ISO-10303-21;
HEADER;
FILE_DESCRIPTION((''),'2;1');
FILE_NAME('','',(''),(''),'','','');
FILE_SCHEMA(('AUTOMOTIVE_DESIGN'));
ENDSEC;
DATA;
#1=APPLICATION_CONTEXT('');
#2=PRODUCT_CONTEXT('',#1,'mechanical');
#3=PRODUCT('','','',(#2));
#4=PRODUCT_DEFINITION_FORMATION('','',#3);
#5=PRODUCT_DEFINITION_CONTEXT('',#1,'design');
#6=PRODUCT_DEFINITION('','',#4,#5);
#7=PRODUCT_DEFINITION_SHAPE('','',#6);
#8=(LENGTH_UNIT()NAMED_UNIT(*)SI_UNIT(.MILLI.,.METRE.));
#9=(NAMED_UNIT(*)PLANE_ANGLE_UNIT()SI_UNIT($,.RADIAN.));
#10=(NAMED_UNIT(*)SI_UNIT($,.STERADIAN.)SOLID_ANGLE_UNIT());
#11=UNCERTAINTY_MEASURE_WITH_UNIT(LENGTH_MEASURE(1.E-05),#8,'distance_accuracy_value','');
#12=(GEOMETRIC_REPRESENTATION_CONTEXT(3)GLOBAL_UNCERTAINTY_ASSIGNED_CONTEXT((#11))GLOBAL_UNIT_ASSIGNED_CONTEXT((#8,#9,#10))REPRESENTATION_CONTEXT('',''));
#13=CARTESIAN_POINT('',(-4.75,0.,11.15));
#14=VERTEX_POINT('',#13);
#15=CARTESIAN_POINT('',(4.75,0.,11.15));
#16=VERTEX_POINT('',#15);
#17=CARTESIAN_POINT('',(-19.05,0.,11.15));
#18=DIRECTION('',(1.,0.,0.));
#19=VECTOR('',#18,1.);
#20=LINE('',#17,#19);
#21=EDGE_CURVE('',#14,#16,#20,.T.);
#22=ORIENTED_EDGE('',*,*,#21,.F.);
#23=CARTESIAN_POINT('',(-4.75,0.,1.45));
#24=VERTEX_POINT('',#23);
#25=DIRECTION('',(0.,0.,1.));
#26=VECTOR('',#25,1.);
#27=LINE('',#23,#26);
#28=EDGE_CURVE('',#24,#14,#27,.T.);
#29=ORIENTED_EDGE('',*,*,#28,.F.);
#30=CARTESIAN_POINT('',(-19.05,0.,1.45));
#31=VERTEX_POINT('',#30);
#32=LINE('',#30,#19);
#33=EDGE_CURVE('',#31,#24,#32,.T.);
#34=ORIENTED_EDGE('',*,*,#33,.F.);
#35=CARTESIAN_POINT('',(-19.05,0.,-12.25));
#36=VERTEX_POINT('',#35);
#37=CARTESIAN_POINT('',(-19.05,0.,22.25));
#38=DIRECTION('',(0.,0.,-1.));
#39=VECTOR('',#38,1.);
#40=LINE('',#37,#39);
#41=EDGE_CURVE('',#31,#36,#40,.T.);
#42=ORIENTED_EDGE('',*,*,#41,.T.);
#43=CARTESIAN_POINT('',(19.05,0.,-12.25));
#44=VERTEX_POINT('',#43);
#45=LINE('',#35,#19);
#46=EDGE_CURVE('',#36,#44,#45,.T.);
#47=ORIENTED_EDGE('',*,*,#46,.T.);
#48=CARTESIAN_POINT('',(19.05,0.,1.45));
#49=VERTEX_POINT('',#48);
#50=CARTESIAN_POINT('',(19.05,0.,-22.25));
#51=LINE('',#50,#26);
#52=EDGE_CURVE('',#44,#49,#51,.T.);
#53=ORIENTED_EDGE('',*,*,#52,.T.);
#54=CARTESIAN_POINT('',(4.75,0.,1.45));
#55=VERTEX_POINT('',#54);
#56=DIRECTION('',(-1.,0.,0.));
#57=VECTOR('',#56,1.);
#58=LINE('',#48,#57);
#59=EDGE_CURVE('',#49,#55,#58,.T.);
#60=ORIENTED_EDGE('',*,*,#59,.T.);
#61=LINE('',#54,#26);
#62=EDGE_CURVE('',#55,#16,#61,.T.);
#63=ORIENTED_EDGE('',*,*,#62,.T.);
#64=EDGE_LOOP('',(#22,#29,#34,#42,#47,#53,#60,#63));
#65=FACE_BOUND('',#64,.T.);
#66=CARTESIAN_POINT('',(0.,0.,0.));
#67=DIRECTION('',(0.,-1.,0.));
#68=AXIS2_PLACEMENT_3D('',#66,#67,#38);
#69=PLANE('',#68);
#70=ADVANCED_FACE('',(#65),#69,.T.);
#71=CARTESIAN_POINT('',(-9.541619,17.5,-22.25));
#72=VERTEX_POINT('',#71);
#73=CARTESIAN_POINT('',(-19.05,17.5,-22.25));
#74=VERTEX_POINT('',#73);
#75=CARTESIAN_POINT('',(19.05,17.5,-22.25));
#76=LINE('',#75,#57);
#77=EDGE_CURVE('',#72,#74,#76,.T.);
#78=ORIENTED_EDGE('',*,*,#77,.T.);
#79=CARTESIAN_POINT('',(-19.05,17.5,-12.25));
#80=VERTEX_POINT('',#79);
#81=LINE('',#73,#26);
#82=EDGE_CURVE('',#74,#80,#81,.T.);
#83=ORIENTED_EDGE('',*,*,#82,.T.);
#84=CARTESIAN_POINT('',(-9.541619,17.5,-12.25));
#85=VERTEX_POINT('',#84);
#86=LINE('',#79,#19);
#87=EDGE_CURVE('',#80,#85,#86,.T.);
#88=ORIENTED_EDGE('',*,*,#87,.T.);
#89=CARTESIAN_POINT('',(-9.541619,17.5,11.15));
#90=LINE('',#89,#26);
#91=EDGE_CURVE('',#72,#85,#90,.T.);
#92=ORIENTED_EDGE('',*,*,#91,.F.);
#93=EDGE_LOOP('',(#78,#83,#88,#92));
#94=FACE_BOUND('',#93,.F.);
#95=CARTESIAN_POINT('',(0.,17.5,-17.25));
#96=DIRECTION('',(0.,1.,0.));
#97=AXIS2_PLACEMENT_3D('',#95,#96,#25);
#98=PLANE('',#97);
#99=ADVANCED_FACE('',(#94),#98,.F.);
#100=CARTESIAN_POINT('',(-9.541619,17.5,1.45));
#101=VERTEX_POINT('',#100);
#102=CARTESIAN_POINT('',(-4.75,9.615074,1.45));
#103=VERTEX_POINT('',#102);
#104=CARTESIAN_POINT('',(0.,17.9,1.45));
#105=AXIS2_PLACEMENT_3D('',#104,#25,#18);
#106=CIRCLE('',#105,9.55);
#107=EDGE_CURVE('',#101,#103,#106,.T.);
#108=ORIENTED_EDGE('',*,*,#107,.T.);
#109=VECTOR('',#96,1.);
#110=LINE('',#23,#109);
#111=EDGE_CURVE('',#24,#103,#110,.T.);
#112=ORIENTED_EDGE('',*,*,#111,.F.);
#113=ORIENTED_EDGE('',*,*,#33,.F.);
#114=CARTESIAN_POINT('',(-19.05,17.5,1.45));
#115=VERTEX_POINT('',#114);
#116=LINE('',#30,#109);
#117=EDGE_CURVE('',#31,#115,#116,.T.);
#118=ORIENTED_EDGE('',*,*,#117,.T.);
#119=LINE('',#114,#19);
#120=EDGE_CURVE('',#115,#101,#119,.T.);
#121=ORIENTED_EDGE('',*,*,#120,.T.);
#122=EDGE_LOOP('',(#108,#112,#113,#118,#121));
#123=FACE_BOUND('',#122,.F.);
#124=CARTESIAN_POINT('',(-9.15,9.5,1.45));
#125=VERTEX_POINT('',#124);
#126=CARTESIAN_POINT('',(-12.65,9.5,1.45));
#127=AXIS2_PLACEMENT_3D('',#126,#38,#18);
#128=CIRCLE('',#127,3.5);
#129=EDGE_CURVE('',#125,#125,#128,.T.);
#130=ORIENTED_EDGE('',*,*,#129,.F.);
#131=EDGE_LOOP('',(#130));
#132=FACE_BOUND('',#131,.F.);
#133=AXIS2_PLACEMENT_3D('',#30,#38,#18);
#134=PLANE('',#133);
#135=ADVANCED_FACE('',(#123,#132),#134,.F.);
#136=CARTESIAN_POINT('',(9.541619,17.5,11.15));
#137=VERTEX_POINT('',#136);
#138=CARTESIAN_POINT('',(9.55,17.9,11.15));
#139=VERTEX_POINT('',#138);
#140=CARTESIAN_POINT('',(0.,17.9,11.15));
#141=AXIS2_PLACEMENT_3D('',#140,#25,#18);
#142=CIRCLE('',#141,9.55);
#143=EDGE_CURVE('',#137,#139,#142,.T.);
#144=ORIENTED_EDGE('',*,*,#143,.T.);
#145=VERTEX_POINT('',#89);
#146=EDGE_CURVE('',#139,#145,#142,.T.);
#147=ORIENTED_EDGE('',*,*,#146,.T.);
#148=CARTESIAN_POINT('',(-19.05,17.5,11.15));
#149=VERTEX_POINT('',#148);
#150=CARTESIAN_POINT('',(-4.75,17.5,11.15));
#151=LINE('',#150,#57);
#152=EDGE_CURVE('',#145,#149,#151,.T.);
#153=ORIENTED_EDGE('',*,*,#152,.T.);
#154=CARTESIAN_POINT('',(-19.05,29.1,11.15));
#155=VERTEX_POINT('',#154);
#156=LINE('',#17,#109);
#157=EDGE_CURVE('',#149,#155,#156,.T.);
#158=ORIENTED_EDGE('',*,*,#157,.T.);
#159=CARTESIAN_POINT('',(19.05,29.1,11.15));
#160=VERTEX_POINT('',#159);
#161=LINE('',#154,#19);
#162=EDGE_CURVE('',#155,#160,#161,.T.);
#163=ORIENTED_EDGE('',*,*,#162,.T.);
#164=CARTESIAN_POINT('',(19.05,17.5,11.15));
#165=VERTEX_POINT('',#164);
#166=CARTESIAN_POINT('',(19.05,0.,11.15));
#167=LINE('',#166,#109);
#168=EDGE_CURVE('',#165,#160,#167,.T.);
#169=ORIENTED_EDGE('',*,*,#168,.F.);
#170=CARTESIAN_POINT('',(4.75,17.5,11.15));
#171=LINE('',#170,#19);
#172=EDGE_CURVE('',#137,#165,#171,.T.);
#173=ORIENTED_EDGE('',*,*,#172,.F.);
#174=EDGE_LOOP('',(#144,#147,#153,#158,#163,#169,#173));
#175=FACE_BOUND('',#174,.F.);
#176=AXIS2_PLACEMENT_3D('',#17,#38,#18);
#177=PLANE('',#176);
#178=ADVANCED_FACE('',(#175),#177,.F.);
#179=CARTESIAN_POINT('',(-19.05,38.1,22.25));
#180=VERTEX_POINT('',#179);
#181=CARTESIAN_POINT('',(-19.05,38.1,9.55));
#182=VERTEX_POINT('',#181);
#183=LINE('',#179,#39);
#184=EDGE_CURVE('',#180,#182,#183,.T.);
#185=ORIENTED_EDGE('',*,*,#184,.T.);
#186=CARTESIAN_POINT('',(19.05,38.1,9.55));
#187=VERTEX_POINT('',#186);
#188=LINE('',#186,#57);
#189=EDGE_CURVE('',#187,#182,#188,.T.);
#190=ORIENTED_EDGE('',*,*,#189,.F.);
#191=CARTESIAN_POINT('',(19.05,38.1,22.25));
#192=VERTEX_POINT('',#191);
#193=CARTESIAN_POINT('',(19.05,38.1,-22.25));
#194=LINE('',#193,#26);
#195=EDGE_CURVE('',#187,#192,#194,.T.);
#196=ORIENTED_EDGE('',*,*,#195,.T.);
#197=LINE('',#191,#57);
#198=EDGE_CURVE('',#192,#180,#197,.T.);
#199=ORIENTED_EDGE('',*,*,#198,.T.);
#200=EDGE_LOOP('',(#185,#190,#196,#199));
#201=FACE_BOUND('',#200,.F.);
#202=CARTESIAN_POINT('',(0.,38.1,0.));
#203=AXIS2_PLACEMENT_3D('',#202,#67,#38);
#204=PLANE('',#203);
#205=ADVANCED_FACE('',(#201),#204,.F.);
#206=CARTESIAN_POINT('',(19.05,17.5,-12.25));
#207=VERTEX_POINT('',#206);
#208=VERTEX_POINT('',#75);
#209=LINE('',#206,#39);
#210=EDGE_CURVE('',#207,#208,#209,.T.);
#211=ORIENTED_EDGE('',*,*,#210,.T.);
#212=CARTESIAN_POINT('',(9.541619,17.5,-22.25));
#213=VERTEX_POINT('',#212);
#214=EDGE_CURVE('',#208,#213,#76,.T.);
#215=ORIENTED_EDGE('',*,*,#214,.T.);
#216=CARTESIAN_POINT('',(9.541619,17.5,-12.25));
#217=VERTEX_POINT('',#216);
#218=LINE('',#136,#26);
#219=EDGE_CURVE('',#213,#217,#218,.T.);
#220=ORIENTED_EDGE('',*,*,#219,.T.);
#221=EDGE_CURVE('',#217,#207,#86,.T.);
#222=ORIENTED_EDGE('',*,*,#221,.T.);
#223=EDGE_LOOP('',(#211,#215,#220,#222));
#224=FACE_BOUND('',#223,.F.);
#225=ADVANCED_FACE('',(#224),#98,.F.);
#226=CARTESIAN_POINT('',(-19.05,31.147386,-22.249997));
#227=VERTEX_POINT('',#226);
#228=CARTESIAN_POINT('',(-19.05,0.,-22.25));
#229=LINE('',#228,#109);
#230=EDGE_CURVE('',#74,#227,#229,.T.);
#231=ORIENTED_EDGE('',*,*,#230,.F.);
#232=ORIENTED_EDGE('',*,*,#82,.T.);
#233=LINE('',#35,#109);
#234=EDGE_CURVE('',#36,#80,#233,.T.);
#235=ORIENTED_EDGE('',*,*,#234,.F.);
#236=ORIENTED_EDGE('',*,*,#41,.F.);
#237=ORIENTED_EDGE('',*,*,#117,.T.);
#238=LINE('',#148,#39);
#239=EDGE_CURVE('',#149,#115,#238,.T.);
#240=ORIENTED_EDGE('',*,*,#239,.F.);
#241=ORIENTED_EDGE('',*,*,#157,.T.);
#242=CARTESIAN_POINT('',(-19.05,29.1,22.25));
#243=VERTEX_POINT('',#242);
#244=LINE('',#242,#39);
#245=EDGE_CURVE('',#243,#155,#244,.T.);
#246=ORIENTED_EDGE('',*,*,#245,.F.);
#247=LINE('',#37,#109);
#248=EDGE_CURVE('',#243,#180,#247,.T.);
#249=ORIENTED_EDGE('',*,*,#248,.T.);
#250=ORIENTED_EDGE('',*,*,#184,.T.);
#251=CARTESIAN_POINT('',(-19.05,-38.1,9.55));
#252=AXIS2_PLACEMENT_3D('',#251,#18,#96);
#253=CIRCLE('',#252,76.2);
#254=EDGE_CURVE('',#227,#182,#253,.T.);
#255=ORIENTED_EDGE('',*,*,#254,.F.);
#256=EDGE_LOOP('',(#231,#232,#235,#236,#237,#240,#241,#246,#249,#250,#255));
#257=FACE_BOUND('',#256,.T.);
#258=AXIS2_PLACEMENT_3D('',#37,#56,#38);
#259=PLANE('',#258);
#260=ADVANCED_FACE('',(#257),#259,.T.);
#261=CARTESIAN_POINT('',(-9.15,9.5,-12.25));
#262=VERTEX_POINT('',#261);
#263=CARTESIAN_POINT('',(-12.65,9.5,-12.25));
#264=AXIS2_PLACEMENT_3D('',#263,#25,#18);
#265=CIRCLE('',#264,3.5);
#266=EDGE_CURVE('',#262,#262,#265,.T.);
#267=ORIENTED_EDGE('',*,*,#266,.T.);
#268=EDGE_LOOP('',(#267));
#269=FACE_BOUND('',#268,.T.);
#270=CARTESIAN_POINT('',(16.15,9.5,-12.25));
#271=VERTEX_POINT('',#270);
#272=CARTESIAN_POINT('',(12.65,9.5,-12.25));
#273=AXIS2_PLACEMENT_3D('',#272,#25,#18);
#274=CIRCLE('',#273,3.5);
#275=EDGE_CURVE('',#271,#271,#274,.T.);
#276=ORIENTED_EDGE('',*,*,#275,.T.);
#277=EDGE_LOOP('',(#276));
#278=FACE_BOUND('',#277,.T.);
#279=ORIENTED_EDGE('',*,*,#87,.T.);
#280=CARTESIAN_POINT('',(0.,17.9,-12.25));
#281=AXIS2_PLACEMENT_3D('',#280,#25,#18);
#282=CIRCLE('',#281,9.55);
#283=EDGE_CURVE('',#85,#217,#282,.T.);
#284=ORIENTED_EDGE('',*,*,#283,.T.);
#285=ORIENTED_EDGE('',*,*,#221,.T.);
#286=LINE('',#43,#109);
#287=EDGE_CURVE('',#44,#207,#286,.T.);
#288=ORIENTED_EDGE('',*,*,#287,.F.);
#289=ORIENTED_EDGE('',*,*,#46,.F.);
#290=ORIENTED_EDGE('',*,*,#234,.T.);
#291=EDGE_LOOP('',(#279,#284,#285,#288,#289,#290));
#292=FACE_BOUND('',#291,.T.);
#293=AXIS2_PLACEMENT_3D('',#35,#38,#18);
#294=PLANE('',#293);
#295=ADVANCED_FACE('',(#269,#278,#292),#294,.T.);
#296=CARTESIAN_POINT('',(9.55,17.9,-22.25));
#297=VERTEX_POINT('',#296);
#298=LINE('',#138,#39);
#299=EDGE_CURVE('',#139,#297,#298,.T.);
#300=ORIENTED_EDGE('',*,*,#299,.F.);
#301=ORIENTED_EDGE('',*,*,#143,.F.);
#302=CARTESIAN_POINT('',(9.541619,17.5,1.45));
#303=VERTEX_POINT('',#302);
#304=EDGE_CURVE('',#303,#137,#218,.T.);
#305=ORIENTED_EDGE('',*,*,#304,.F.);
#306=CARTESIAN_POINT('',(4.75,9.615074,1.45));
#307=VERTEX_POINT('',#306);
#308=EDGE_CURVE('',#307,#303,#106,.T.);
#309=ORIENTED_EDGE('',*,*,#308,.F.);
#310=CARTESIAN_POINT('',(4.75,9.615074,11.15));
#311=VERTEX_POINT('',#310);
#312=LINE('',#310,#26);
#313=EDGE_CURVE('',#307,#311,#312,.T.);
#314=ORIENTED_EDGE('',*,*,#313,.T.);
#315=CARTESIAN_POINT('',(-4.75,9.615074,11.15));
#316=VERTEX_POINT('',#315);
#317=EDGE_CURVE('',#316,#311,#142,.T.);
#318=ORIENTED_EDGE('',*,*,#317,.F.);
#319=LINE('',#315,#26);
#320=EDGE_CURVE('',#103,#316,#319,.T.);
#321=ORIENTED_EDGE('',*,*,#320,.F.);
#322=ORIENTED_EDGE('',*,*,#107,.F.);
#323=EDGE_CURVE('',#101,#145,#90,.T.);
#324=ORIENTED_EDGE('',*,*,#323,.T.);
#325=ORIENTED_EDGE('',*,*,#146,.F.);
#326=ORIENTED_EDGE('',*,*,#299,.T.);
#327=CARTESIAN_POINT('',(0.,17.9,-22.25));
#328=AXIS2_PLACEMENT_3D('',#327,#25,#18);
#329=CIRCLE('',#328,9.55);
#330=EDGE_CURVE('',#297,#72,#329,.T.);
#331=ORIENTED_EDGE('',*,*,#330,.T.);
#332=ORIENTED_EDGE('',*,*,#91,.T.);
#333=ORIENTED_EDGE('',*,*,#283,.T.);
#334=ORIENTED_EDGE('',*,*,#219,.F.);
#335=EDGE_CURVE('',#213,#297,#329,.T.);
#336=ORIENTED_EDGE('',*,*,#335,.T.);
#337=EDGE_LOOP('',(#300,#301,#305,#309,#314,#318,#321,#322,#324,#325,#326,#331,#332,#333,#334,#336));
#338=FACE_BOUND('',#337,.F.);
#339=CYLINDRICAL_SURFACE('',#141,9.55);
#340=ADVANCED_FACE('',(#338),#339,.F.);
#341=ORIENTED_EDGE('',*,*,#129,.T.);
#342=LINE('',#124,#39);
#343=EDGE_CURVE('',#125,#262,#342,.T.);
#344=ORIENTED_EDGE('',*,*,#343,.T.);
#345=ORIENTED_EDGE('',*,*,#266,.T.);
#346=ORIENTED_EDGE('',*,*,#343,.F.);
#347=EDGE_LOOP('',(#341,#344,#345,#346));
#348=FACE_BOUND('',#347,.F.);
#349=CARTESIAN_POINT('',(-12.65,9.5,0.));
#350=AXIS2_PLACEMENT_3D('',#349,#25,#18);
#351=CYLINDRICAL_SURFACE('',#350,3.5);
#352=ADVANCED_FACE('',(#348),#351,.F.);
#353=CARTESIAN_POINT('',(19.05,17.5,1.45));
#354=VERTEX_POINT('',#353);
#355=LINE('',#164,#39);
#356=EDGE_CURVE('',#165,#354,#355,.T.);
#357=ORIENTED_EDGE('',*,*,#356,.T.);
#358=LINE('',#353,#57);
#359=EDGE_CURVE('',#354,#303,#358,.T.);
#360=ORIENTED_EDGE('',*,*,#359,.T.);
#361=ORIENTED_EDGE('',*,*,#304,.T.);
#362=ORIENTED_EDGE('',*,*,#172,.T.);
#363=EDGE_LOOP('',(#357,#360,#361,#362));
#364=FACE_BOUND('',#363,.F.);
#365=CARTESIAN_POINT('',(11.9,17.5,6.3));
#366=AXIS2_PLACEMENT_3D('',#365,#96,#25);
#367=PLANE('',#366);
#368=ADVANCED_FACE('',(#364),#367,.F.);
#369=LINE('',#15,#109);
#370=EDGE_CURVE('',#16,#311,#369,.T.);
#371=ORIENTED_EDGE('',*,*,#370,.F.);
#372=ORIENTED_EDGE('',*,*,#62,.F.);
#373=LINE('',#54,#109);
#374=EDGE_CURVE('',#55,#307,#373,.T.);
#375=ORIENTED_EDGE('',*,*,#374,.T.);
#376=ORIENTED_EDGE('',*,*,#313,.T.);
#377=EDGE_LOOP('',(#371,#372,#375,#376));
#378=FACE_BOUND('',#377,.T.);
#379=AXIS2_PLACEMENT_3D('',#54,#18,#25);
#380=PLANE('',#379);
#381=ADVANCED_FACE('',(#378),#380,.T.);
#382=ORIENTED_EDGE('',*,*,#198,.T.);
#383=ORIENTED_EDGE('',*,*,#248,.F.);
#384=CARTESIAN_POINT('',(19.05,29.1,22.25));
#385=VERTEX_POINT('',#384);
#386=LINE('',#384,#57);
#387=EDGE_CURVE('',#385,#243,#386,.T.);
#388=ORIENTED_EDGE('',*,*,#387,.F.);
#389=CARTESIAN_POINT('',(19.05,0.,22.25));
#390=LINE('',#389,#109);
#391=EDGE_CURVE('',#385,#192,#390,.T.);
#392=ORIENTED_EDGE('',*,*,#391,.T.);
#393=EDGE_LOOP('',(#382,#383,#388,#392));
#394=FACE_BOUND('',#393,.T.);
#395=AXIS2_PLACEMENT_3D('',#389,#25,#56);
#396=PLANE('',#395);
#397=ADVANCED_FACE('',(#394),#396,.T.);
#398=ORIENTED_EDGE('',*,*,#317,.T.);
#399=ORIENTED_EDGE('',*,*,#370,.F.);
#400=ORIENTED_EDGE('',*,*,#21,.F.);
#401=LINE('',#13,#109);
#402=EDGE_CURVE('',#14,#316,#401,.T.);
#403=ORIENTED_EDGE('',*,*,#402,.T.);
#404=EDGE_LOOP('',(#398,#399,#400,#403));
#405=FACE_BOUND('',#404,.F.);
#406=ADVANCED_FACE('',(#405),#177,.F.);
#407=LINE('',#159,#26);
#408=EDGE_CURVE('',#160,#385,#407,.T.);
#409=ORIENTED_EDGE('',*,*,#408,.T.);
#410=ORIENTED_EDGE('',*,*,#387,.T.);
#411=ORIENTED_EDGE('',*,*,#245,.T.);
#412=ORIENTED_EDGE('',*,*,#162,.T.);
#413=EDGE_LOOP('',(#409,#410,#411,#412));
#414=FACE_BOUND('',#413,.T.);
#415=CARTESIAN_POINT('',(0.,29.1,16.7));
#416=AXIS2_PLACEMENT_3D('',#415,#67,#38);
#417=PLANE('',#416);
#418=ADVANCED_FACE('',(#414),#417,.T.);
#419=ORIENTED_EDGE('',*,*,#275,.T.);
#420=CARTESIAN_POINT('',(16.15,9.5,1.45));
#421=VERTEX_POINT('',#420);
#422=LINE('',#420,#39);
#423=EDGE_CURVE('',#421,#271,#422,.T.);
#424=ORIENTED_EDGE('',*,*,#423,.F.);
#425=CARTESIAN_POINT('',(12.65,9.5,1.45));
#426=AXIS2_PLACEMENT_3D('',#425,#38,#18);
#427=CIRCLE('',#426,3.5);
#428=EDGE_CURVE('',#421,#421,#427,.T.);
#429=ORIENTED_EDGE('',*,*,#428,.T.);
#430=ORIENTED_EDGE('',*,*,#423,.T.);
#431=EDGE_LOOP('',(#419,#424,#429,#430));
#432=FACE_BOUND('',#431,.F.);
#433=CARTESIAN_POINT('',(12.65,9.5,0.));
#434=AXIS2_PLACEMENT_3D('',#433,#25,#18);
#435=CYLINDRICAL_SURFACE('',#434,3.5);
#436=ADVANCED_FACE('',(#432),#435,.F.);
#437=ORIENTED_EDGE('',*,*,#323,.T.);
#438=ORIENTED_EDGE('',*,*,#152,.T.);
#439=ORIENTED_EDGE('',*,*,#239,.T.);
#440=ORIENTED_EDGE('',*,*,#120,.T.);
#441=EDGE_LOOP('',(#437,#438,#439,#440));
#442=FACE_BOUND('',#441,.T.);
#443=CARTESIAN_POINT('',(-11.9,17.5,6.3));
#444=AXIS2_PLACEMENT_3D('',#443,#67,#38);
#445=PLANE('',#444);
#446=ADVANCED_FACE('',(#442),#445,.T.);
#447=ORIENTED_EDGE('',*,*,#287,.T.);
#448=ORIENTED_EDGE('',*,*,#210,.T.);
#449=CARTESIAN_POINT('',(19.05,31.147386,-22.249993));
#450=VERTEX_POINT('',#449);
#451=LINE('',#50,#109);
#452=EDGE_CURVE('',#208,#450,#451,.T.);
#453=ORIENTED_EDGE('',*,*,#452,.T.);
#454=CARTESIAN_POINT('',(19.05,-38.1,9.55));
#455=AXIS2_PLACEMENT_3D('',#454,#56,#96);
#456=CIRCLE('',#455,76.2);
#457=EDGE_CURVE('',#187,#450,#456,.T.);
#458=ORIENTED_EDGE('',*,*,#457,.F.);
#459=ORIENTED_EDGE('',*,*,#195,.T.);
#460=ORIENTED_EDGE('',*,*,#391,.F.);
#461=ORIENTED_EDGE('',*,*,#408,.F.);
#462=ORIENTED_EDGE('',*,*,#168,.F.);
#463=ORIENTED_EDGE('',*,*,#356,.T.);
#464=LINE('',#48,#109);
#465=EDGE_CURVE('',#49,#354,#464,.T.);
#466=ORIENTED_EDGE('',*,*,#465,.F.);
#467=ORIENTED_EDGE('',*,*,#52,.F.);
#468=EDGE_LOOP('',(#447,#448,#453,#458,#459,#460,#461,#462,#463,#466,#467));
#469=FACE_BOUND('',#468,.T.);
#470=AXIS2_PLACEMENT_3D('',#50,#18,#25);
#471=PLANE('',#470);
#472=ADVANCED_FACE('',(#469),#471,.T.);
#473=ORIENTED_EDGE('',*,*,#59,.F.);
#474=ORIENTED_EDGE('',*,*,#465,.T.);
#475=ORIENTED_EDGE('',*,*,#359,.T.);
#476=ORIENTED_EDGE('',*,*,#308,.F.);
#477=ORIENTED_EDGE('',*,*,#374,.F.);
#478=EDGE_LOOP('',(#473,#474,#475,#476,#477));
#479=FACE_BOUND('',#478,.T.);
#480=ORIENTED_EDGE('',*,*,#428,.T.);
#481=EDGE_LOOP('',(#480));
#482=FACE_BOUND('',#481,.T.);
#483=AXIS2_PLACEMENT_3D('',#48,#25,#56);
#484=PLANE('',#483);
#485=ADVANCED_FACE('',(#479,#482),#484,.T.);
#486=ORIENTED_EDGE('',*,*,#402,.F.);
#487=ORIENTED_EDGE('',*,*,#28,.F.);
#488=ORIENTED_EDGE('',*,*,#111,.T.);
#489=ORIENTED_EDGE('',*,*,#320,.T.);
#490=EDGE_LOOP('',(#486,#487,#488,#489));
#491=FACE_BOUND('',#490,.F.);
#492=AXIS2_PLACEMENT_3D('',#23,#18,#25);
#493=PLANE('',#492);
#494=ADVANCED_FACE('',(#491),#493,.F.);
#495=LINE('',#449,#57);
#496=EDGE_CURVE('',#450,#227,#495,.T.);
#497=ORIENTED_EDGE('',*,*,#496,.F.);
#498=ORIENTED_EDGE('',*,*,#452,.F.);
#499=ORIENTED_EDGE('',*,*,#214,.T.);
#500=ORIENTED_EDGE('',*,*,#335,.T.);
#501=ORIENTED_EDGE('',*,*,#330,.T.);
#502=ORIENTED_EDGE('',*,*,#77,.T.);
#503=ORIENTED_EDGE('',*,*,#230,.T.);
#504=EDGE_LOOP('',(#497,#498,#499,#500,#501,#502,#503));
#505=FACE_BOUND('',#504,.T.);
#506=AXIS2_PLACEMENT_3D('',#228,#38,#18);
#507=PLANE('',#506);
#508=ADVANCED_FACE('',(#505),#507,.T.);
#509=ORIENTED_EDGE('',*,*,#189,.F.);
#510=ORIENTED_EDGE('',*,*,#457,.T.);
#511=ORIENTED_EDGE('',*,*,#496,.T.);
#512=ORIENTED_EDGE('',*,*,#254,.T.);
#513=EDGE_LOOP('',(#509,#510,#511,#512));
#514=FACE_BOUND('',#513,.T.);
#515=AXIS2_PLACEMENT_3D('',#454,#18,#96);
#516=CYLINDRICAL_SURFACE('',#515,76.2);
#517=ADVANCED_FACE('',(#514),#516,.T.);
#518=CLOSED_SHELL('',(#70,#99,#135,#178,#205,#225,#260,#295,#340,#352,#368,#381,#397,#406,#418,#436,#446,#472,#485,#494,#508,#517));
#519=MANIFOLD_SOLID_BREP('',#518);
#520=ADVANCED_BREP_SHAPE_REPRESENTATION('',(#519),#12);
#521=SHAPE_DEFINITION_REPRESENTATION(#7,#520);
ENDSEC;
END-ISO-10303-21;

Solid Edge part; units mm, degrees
sketch "Sketch1" plane through (0, 0, 0) normal (0, -1, 0) x (1, 0, 0)
  line L0 (-19.05, -22.25) -> (19.05, -22.25)
  line L1 (19.05, -22.25) -> (19.05, 22.25)
  line L2 (19.05, 22.25) -> (-19.05, 22.25)
  line L3 (-19.05, 22.25) -> (-19.05, -22.25)
extrude "Protrusion1" add sketch "Sketch1" against normal blind 38.1
sketch "Sketch2" plane through (0, 0, 0) normal (0, -1, 0) x (1, 0, 0)
  line L0 (-19.05, 22.25) -> (-19.05, 11.15)
  line L1 (-19.05, 11.15) -> (19.05, 11.15)
  line L2 (19.05, 11.15) -> (19.05, 22.25)
  line L3 (19.05, 22.25) -> (-19.05, 22.25)
extrude "ExtrudedCutout_2" cut sketch "Sketch2" against normal blind 29.1
sketch "Sketch3" plane through (0, 0, -5.55) normal (0, -1, 0) x (1, 0, 0)
  line L0 (-19.05, 16.7) -> (-19.05, 7)
  line L1 (-19.05, 7) -> (-4.75, 7)
  line L2 (-4.75, 7) -> (-4.75, 16.7)
  line L3 (-4.75, 16.7) -> (-19.05, 16.7)
extrude "ExtrudedCutout_3" cut sketch "Sketch3" against normal blind 17.5
sketch "Sketch4" plane through (0, 0, -5.55) normal (0, -1, 0) x (1, 0, 0)
  line L0 (19.05, 16.7) -> (19.05, 7)
  line L1 (19.05, 7) -> (4.75, 7)
  line L2 (4.75, 7) -> (4.75, 16.7)
  line L3 (4.75, 16.7) -> (19.05, 16.7)
extrude "ExtrudedCutout_4" cut sketch "Sketch4" against normal blind 17.5
sketch "Sketch5" plane through (0, 0, 0) normal (0, -1, 0) x (1, 0, 0)
  line L0 (-19.05, -22.25) -> (-19.05, -12.25)
  line L1 (-19.05, -12.25) -> (19.05, -12.25)
  line L2 (19.05, -12.25) -> (19.05, -22.25)
  line L3 (19.05, -22.25) -> (-19.05, -22.25)
extrude "ExtrudedCutout_8" cut sketch "Sketch5" against normal blind 17.5
sketch "Sketch6" plane through (0, 0, 0) normal (0, 0, 1) x (1, 0, 0)
  circle A0 centre (-12.65, 9.5) radius 3.5
  circle A1 centre (12.65, 9.5) radius 3.5
extrude "Cutout1" cut sketch "Sketch6" against normal up to vertex (12.25 mm away)
sketch "Sketch7" plane through (0, 0, 0) normal (0, 0, 1) x (1, 0, 0)
  circle A0 centre (-12.65, 9.5) radius 3.5
extrude "Cutout2" cut sketch "Sketch7" along normal blind 20
sketch "Sketch8" plane through (0, 0, 0) normal (0, 0, 1) x (1, 0, 0)
  circle A0 centre (12.65, 9.5) radius 3.5
extrude "ExtrudedCutout_16" cut sketch "Sketch8" along normal blind 20
sketch "Sketch9" plane through (19.05, 19.05, 0) normal (1, 0, 0) x (0, 1, 0)
  arc A0 (19.05, 9.55) -> (12.0974, -22.25) centre (-57.15, 9.55) cw
  line L0 (12.0974, -22.25) -> (19.05, -22.25)
  line L1 (19.05, -22.25) -> (19.05, 9.55)
extrude "ExtrudedCutout_17" cut sketch "Sketch9" against normal blind 40
sketch "Sketch10" plane through (0, 14.55, 11.15) normal (0, 0, 1) x (1, 0, 0)
  circle A0 centre (0, 3.35) radius 9.55
extrude "Cutout3" cut sketch "Sketch10" against normal blind 98
